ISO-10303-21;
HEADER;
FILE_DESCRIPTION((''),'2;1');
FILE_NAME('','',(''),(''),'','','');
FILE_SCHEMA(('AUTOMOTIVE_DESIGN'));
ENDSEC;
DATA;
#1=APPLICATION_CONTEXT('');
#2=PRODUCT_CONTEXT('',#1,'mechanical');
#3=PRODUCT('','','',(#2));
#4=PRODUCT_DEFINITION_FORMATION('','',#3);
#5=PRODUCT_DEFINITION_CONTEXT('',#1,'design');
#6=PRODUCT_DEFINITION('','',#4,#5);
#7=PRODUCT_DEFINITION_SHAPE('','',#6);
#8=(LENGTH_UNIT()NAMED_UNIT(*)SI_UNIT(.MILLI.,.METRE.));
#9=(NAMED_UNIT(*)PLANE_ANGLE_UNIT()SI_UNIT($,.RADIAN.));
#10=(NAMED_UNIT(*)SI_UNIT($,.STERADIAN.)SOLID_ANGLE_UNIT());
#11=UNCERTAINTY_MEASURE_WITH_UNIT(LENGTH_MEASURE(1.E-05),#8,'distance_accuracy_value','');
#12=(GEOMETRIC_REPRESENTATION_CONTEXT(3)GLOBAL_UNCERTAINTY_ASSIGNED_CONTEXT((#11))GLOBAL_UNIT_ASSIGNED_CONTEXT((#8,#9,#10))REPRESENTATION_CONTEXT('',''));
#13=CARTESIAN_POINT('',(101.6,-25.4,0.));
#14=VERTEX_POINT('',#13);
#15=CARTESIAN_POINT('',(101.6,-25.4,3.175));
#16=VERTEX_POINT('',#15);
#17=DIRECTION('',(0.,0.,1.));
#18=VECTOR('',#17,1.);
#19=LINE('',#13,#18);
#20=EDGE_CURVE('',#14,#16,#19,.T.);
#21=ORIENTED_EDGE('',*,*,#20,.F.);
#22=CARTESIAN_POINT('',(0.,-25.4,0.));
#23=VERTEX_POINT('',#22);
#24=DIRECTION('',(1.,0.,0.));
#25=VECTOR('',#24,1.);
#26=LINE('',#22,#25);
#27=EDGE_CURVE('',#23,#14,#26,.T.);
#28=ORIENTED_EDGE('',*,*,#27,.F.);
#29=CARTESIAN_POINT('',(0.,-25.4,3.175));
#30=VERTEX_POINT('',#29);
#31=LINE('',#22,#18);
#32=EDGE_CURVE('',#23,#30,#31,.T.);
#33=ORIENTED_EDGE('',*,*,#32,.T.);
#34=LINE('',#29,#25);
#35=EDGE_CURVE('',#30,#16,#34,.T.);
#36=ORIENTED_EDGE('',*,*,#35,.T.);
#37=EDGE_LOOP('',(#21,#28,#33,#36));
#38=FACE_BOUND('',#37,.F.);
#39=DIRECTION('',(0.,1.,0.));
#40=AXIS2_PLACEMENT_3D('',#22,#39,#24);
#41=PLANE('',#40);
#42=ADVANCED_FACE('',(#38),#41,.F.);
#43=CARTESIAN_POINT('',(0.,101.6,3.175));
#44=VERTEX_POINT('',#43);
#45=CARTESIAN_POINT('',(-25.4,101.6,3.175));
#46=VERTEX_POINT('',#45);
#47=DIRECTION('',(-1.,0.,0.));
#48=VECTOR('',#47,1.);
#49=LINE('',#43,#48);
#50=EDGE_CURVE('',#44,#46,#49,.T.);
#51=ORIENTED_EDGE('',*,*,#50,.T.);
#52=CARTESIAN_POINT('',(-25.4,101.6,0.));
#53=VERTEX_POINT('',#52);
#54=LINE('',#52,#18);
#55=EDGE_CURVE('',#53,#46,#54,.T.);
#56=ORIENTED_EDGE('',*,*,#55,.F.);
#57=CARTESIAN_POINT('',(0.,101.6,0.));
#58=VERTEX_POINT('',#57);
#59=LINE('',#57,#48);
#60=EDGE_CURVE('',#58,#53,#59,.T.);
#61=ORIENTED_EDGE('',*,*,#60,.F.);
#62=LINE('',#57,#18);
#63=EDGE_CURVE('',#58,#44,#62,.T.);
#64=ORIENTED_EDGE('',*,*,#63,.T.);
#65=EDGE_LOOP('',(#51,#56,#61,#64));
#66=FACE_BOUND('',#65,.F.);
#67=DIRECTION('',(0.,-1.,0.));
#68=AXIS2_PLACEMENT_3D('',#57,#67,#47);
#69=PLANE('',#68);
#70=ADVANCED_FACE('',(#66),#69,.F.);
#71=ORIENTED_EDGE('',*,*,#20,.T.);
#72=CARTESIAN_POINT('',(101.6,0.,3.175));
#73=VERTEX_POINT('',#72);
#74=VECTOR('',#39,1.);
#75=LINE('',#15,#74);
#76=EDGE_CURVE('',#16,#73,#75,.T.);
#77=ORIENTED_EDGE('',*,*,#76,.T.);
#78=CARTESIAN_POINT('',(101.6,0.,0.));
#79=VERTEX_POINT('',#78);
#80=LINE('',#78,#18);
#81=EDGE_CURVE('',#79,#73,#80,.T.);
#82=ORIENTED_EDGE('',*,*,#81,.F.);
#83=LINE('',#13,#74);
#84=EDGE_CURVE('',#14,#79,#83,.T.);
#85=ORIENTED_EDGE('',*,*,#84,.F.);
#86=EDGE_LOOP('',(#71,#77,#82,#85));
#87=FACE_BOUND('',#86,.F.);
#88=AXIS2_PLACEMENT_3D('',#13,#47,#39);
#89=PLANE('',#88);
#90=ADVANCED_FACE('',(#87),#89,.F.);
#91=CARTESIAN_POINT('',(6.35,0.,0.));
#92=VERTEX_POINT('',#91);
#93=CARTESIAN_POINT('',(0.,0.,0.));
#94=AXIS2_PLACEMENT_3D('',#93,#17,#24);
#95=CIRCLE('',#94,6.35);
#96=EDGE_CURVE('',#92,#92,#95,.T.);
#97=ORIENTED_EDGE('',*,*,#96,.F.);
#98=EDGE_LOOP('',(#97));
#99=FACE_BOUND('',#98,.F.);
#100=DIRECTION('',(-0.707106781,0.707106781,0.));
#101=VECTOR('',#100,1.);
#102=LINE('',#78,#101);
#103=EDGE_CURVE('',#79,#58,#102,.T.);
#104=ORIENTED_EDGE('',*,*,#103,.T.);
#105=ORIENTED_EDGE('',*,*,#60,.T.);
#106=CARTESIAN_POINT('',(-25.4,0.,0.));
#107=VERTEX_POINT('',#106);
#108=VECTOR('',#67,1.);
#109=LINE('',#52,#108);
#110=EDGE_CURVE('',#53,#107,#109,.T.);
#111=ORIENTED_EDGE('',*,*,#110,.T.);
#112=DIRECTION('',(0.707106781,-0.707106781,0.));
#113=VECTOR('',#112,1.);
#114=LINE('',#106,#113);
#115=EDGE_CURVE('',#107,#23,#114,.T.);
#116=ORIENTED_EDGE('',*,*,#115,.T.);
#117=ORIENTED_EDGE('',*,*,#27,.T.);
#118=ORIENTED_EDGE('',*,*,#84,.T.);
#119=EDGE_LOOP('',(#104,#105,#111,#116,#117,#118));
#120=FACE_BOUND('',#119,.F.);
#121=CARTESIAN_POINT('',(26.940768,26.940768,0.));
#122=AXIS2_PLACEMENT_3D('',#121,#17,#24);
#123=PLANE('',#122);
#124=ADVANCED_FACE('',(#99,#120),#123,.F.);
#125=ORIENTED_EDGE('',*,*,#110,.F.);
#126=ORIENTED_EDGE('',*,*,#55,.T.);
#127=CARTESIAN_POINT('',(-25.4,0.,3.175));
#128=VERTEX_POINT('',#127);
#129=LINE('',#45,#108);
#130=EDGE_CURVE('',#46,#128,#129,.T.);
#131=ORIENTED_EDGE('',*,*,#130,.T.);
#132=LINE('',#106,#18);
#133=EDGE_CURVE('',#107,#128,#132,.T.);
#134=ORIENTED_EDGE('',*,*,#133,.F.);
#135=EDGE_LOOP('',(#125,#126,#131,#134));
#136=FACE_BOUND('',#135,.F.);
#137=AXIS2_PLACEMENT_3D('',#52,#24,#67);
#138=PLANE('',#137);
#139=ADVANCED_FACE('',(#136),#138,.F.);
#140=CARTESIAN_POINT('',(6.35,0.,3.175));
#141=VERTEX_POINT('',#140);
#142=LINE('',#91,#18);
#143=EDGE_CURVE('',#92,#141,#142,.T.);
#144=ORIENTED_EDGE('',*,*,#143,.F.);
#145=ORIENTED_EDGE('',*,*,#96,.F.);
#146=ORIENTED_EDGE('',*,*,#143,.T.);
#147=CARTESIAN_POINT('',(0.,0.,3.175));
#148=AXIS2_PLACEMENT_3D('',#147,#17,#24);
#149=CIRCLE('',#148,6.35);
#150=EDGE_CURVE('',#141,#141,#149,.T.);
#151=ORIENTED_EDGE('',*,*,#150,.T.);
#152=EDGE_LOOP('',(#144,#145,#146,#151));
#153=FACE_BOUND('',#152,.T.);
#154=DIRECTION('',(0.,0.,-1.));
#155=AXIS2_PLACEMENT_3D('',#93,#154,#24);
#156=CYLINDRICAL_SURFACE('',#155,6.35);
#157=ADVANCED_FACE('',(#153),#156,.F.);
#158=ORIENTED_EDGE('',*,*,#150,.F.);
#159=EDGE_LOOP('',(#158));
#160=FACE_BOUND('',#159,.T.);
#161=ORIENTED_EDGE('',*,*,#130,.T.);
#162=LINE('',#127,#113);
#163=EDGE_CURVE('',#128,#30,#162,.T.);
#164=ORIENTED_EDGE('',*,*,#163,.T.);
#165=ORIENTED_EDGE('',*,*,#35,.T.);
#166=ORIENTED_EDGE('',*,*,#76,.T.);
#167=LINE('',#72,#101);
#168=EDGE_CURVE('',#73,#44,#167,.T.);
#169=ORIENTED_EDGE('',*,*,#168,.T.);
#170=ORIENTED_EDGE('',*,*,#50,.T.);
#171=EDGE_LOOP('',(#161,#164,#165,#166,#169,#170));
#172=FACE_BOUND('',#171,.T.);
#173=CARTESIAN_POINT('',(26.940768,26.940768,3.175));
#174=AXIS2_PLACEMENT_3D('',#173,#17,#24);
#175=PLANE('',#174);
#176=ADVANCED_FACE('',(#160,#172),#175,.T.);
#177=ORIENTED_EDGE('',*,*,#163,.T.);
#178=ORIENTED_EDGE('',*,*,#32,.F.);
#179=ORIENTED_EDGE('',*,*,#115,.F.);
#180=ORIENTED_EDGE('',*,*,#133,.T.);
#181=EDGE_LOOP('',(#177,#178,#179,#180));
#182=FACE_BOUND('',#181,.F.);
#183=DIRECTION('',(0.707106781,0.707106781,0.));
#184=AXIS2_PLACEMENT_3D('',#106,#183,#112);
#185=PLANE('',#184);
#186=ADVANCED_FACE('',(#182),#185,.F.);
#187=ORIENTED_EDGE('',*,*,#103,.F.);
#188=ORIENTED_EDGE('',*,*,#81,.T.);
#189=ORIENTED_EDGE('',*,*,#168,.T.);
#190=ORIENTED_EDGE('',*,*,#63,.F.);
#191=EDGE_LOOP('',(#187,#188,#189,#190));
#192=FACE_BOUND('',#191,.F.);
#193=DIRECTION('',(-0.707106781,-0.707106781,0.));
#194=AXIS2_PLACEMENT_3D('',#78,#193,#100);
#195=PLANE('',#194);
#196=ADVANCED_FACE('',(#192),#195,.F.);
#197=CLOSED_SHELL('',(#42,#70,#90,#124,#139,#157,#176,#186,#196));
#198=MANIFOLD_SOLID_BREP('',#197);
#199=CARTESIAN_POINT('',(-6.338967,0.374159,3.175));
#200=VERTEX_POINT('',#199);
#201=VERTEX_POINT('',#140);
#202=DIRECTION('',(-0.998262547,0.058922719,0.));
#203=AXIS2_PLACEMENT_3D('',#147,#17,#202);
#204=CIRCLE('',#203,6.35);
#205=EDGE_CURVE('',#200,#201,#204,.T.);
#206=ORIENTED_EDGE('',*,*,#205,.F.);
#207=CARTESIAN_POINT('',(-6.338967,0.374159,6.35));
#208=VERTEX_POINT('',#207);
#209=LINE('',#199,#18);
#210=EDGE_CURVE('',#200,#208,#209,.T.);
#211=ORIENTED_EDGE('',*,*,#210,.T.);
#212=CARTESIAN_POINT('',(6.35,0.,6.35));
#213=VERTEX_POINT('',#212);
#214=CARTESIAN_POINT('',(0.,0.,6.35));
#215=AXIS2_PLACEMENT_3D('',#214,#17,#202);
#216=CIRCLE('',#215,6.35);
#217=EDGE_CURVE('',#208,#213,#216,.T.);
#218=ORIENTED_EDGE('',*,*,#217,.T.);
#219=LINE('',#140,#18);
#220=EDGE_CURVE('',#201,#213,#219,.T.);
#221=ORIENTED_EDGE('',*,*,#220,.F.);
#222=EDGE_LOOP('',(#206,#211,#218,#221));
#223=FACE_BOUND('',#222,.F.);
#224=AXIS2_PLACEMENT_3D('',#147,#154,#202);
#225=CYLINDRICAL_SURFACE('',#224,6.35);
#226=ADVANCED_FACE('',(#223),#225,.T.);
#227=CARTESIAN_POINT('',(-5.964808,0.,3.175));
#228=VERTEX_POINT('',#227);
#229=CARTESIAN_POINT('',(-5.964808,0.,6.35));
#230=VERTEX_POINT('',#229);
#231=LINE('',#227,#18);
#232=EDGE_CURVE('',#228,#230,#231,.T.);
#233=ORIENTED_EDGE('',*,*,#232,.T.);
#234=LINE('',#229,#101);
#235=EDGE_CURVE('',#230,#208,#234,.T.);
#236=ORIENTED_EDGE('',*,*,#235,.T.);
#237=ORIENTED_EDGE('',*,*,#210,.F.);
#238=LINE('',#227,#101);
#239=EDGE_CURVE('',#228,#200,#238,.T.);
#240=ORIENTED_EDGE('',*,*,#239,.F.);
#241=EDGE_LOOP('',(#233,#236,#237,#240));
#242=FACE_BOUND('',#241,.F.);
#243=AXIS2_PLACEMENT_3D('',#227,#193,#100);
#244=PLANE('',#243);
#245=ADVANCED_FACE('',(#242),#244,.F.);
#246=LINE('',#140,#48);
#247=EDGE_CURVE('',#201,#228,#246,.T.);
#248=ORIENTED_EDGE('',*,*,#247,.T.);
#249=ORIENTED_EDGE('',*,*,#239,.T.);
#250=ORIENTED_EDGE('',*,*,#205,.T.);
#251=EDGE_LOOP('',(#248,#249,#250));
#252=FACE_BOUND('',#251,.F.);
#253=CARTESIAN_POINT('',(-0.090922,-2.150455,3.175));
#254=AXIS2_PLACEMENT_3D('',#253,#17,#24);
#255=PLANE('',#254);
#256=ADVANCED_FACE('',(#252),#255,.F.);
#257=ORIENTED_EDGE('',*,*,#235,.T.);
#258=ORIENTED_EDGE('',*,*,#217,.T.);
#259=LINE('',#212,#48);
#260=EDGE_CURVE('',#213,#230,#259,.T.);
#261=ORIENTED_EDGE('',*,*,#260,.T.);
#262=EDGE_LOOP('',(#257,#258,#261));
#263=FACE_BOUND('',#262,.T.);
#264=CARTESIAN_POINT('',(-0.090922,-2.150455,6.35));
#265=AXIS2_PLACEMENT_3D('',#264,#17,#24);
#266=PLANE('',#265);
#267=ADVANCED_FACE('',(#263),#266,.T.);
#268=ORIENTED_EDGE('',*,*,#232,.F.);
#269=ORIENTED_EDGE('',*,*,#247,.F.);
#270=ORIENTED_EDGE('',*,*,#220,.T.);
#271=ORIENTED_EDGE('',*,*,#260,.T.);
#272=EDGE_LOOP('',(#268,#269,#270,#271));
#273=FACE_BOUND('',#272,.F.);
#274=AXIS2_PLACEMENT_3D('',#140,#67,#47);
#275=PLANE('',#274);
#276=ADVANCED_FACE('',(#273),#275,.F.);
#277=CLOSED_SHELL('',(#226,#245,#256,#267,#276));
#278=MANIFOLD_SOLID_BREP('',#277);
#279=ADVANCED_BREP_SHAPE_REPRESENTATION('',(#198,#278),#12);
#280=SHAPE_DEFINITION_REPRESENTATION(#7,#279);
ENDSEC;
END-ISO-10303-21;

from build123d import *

# Parameters (mm, degrees)
F0_R     = 6.35
F1_DEPTH = 3.175
F3_DEPTH = 3.175


with BuildPart() as f1:
    # F0 (on Top) → F1 (new body)
    with BuildSketch(Plane.XY):
        Polygon((-25.4, 101.6), (-25.4, 0), (0, -25.4), (101.6, -25.4), (101.6, -12.7), (101.6, 0), (0, 101.6), align=None)
        Circle(F0_R, mode=Mode.SUBTRACT)
    extrude(amount=F1_DEPTH)


with BuildPart() as f3:
    # F2 (on face) → F3 (new body)
    with BuildSketch(Plane.XY.offset(3.175)):
        with BuildLine():
            ThreePointArc((-6.3389671749, 0.3741592657), (-0.1871609463, -6.3472411944), (6.35, 0))
            Line((6.35, 0), (-5.9648079092, 0))
            Line((-5.9648079092, 0), (-6.3389671749, 0.3741592657))
        make_face()
    extrude(amount=F3_DEPTH)


solid = Compound([f1.part, f3.part])
